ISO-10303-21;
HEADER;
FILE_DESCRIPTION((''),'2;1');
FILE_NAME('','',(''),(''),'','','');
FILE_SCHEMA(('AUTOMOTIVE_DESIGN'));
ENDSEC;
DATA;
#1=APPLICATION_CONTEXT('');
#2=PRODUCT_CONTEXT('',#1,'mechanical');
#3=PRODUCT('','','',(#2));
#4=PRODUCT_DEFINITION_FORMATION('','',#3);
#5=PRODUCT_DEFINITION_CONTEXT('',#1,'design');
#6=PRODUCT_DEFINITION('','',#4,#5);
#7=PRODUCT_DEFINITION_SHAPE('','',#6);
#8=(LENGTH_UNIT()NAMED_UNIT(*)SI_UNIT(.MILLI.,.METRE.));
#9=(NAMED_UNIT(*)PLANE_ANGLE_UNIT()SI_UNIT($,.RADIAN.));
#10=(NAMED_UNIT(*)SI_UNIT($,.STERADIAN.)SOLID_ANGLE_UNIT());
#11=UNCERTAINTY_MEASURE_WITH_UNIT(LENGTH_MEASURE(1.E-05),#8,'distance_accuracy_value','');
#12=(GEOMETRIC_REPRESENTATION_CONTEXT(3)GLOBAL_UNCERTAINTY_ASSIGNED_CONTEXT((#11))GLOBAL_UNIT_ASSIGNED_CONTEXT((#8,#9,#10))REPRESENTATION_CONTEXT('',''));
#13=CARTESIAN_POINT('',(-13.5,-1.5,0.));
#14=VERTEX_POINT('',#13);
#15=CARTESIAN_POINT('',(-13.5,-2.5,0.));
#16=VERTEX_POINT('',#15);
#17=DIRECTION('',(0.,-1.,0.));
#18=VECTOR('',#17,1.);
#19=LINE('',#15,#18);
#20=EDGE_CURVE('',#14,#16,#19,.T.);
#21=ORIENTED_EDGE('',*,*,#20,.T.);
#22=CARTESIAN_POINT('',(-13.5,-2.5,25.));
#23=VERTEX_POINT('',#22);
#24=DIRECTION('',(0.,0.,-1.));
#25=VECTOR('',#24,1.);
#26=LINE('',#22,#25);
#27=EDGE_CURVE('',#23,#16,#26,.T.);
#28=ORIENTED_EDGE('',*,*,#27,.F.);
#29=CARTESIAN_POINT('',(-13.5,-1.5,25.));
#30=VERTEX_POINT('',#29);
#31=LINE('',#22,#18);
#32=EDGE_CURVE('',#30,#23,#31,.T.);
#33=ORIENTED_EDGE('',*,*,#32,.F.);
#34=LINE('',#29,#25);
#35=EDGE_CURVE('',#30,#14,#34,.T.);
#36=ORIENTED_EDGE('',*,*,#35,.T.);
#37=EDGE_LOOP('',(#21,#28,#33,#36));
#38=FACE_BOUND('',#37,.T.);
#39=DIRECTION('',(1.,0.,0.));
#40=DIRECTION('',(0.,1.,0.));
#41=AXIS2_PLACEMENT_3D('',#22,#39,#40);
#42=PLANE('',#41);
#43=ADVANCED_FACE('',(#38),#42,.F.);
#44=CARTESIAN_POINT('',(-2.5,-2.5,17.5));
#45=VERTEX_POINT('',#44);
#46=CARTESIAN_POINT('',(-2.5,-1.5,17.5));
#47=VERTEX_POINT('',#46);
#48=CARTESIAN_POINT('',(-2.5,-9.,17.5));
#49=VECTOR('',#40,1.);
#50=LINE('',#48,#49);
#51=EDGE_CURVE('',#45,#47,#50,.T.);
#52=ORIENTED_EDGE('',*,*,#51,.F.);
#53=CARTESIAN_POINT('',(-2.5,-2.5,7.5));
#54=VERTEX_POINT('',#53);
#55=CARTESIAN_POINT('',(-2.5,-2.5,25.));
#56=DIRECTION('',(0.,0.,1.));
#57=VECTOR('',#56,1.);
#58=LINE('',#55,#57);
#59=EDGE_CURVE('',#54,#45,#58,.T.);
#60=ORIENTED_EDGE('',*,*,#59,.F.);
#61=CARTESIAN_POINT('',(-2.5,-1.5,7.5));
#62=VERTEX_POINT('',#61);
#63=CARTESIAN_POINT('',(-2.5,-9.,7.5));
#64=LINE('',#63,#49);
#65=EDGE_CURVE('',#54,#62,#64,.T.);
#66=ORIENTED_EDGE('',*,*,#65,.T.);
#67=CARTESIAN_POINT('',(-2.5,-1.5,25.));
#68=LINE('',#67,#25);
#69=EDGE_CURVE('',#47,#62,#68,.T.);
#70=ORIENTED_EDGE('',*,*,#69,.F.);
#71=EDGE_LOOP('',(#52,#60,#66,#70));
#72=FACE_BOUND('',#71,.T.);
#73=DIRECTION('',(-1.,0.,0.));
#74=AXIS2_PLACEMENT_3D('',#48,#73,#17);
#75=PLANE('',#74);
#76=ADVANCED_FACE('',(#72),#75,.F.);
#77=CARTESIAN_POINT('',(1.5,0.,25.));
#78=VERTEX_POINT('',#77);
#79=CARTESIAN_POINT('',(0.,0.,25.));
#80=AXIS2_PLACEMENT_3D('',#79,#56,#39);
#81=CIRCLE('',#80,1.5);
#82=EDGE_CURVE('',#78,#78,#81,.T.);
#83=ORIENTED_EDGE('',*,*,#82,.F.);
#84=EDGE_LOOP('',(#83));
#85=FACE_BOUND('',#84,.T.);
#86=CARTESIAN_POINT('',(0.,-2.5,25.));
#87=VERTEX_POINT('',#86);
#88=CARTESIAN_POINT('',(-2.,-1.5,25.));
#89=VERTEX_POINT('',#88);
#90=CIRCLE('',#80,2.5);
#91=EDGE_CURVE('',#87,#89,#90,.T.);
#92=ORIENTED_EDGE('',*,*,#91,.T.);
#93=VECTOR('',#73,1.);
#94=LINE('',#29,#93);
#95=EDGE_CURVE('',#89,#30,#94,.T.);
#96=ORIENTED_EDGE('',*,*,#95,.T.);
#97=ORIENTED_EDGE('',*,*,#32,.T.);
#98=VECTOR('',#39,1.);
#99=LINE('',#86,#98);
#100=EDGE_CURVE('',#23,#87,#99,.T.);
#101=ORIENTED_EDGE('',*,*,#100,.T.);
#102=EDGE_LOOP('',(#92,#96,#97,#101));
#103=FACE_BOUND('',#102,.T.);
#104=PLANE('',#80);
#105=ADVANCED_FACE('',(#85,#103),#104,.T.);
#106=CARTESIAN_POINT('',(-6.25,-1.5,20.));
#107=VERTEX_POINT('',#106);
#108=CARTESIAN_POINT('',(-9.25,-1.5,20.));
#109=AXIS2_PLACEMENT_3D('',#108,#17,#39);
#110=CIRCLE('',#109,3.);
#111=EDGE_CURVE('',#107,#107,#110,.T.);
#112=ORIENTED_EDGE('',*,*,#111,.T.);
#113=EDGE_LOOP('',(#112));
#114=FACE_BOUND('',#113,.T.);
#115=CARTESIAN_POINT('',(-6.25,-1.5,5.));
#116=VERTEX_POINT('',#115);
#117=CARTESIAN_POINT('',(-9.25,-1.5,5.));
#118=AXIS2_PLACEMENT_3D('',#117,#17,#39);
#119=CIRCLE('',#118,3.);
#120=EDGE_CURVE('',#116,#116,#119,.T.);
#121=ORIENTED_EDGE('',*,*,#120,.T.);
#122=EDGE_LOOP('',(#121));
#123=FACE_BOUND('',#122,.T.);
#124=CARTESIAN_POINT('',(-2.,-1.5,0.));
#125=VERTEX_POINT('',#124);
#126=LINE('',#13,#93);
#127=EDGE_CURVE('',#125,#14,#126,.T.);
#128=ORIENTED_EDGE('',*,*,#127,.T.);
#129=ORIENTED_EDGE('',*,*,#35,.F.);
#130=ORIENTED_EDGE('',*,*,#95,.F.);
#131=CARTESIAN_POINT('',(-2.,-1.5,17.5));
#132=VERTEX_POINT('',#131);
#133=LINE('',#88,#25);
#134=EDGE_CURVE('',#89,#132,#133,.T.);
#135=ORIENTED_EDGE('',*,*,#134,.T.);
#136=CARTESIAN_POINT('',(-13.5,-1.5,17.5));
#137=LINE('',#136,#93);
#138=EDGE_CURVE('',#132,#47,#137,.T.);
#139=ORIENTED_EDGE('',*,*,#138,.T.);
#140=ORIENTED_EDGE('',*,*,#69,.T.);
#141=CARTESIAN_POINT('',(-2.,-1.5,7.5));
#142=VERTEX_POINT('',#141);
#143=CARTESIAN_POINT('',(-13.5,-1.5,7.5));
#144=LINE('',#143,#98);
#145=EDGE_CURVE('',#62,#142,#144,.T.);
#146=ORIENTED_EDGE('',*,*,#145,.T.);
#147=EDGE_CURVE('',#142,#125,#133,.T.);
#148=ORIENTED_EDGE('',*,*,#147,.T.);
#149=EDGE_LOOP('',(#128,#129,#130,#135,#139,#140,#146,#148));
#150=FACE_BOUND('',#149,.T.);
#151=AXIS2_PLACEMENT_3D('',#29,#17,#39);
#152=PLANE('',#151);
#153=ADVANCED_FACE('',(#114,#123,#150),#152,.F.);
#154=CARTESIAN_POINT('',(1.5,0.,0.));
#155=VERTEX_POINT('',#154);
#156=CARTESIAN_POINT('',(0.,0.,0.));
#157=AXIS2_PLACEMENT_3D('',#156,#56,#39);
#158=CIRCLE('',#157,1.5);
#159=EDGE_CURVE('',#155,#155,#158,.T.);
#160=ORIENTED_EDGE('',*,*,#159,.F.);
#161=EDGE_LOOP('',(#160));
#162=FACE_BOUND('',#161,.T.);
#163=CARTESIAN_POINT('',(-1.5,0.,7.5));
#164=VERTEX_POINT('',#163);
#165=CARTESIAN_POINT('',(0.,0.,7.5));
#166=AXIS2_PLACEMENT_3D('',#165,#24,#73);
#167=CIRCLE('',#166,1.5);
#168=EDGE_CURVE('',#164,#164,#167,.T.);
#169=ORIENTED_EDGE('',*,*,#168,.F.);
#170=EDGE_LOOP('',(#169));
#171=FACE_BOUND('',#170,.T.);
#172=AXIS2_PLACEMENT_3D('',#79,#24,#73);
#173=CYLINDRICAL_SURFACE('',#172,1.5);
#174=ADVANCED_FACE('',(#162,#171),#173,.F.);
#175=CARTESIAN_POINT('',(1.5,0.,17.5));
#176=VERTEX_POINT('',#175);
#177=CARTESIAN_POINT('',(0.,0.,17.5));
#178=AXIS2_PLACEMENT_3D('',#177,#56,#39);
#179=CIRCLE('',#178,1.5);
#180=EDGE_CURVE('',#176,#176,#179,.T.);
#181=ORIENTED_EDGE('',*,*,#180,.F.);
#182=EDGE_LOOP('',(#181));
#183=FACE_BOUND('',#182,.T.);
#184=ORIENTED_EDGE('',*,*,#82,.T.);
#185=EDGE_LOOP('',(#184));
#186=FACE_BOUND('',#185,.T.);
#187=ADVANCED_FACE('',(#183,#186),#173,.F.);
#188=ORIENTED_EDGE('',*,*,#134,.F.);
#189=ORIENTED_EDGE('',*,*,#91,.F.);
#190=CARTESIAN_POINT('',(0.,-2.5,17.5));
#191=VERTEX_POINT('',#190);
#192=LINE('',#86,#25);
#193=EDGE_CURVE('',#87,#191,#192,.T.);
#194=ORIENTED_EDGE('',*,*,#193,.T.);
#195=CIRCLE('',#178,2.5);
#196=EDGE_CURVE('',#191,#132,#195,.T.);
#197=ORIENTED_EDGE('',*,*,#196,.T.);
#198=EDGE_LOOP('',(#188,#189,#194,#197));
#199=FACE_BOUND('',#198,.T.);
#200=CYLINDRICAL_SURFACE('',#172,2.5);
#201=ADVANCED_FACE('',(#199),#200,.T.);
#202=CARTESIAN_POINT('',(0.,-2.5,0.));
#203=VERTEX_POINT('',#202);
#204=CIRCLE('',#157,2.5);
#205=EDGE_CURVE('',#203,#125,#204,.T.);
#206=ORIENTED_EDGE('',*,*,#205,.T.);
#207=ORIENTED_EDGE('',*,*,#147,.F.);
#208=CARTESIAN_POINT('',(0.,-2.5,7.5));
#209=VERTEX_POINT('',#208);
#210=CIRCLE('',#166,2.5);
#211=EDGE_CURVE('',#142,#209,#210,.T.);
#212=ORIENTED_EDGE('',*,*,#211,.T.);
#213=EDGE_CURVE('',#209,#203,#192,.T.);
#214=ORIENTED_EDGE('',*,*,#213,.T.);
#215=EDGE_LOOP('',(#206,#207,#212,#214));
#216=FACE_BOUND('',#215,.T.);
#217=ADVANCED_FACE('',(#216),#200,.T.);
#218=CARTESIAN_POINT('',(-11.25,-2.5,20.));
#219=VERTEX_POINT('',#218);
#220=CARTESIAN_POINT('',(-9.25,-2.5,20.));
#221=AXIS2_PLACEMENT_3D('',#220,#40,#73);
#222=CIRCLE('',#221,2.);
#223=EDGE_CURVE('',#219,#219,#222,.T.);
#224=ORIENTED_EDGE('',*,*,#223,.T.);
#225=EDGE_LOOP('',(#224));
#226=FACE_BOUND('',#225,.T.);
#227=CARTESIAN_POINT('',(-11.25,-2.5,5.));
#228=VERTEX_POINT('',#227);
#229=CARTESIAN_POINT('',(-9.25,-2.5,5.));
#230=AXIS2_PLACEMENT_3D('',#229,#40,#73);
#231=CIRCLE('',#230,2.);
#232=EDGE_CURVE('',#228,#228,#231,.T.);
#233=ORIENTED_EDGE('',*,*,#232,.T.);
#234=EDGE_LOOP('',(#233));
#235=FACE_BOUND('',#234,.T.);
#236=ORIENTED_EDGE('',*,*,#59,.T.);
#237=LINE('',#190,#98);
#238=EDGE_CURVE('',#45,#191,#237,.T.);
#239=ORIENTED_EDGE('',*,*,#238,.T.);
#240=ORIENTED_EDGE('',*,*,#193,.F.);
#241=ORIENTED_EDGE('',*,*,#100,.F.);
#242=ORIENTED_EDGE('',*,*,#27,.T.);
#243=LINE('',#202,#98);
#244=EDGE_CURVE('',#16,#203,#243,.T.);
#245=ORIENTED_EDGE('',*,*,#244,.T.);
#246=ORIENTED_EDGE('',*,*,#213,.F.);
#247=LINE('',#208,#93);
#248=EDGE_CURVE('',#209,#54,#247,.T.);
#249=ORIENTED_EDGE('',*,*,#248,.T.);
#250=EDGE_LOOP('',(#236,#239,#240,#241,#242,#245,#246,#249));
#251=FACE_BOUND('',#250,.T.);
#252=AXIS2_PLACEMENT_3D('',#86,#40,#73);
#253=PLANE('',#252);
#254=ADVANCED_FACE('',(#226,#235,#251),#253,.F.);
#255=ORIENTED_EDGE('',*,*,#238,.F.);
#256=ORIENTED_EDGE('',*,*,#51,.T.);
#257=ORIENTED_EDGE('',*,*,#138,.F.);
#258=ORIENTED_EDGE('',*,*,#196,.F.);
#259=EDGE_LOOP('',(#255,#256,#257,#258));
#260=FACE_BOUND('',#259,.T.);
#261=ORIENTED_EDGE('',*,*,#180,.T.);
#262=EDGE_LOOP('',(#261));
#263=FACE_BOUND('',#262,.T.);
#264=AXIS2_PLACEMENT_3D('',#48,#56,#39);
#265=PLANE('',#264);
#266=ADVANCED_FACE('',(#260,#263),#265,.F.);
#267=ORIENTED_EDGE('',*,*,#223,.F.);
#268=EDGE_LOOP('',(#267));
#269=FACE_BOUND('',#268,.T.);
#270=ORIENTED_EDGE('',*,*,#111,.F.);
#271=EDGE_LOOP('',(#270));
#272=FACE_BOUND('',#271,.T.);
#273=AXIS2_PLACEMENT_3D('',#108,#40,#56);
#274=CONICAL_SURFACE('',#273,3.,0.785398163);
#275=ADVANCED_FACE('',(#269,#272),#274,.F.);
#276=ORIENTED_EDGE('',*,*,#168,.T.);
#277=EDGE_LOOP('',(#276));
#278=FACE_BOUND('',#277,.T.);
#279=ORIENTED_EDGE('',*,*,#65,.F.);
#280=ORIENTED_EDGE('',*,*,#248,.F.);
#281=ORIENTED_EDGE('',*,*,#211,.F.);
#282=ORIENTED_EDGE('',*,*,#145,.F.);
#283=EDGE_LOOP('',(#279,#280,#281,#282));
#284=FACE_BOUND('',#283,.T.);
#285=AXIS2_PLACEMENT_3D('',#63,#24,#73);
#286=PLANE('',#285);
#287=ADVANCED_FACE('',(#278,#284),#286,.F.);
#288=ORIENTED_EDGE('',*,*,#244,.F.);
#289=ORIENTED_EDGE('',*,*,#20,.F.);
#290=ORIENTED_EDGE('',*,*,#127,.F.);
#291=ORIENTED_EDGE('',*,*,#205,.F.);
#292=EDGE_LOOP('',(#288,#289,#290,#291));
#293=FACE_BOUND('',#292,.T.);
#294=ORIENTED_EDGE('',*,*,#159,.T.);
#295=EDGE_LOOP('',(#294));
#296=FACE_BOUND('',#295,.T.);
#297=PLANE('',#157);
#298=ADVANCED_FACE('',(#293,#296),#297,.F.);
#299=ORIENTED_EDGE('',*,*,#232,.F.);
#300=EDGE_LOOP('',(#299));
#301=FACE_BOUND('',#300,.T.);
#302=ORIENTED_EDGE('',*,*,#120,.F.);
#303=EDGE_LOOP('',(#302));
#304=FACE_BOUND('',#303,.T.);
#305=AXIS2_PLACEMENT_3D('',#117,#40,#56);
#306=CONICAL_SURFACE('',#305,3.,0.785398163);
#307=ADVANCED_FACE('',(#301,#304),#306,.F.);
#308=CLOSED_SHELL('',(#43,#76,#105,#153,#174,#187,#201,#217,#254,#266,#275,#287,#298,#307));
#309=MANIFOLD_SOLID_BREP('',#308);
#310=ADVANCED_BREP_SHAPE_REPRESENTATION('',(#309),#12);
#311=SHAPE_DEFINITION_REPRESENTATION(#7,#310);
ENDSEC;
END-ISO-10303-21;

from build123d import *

# Parameters (mm, degrees)
SKETCH_1_R          = 1.5
EXTRUDE_1_DEPTH     = 25
SKETCH_2_R          = 2
SKETCH_2_W          = 5
SKETCH_2_H          = 10
CUT_EXTRUDE_1_DEPTH = 7.5
CHAMFER_1_SIZE      = 1


with BuildPart() as part:
    # 草图1 → 凸台-拉伸1 (new body)
    with BuildSketch(Plane.XY):
        with BuildLine():
            Line((0, -2.5), (-13.5, -2.5))
            Line((-13.5, -2.5), (-13.5, -1.5))
            Line((-13.5, -1.5), (-2, -1.5))
            ThreePointArc((-2, -1.5), (1.118033989, 2.236067977), (0, -2.5))
        make_face()
        Circle(SKETCH_1_R, mode=Mode.SUBTRACT)
    extrude(amount=EXTRUDE_1_DEPTH)

    # 草图2 → 切除-拉伸1 (cut, symmetric)
    with BuildSketch(Plane(origin=(0, -1.5, 0), x_dir=(1, 0, 0), z_dir=(0, 1, 0))):
        with Locations(Location((-9.25, -5, 0), (0, 0, 180))):
            Circle(SKETCH_2_R)
        with Locations(Location((-9.25, -20, 0), (0, 0, 180))):
            Circle(SKETCH_2_R)
        with Locations((0, -12.5)):
            Rectangle(SKETCH_2_W, SKETCH_2_H)
    extrude(amount=CUT_EXTRUDE_1_DEPTH, both=True, mode=Mode.SUBTRACT)

    # 倒角1
    chamfer_1_edges = [part.edges().sort_by_distance(p)[0] for p in [
        (-7.25, -1.5, 5),
        (-7.25, -1.5, 20),
    ]]
    chamfer(chamfer_1_edges, length=CHAMFER_1_SIZE - 0.0001)  # a hair under: the kernel refuses the full size


solid = part.part
